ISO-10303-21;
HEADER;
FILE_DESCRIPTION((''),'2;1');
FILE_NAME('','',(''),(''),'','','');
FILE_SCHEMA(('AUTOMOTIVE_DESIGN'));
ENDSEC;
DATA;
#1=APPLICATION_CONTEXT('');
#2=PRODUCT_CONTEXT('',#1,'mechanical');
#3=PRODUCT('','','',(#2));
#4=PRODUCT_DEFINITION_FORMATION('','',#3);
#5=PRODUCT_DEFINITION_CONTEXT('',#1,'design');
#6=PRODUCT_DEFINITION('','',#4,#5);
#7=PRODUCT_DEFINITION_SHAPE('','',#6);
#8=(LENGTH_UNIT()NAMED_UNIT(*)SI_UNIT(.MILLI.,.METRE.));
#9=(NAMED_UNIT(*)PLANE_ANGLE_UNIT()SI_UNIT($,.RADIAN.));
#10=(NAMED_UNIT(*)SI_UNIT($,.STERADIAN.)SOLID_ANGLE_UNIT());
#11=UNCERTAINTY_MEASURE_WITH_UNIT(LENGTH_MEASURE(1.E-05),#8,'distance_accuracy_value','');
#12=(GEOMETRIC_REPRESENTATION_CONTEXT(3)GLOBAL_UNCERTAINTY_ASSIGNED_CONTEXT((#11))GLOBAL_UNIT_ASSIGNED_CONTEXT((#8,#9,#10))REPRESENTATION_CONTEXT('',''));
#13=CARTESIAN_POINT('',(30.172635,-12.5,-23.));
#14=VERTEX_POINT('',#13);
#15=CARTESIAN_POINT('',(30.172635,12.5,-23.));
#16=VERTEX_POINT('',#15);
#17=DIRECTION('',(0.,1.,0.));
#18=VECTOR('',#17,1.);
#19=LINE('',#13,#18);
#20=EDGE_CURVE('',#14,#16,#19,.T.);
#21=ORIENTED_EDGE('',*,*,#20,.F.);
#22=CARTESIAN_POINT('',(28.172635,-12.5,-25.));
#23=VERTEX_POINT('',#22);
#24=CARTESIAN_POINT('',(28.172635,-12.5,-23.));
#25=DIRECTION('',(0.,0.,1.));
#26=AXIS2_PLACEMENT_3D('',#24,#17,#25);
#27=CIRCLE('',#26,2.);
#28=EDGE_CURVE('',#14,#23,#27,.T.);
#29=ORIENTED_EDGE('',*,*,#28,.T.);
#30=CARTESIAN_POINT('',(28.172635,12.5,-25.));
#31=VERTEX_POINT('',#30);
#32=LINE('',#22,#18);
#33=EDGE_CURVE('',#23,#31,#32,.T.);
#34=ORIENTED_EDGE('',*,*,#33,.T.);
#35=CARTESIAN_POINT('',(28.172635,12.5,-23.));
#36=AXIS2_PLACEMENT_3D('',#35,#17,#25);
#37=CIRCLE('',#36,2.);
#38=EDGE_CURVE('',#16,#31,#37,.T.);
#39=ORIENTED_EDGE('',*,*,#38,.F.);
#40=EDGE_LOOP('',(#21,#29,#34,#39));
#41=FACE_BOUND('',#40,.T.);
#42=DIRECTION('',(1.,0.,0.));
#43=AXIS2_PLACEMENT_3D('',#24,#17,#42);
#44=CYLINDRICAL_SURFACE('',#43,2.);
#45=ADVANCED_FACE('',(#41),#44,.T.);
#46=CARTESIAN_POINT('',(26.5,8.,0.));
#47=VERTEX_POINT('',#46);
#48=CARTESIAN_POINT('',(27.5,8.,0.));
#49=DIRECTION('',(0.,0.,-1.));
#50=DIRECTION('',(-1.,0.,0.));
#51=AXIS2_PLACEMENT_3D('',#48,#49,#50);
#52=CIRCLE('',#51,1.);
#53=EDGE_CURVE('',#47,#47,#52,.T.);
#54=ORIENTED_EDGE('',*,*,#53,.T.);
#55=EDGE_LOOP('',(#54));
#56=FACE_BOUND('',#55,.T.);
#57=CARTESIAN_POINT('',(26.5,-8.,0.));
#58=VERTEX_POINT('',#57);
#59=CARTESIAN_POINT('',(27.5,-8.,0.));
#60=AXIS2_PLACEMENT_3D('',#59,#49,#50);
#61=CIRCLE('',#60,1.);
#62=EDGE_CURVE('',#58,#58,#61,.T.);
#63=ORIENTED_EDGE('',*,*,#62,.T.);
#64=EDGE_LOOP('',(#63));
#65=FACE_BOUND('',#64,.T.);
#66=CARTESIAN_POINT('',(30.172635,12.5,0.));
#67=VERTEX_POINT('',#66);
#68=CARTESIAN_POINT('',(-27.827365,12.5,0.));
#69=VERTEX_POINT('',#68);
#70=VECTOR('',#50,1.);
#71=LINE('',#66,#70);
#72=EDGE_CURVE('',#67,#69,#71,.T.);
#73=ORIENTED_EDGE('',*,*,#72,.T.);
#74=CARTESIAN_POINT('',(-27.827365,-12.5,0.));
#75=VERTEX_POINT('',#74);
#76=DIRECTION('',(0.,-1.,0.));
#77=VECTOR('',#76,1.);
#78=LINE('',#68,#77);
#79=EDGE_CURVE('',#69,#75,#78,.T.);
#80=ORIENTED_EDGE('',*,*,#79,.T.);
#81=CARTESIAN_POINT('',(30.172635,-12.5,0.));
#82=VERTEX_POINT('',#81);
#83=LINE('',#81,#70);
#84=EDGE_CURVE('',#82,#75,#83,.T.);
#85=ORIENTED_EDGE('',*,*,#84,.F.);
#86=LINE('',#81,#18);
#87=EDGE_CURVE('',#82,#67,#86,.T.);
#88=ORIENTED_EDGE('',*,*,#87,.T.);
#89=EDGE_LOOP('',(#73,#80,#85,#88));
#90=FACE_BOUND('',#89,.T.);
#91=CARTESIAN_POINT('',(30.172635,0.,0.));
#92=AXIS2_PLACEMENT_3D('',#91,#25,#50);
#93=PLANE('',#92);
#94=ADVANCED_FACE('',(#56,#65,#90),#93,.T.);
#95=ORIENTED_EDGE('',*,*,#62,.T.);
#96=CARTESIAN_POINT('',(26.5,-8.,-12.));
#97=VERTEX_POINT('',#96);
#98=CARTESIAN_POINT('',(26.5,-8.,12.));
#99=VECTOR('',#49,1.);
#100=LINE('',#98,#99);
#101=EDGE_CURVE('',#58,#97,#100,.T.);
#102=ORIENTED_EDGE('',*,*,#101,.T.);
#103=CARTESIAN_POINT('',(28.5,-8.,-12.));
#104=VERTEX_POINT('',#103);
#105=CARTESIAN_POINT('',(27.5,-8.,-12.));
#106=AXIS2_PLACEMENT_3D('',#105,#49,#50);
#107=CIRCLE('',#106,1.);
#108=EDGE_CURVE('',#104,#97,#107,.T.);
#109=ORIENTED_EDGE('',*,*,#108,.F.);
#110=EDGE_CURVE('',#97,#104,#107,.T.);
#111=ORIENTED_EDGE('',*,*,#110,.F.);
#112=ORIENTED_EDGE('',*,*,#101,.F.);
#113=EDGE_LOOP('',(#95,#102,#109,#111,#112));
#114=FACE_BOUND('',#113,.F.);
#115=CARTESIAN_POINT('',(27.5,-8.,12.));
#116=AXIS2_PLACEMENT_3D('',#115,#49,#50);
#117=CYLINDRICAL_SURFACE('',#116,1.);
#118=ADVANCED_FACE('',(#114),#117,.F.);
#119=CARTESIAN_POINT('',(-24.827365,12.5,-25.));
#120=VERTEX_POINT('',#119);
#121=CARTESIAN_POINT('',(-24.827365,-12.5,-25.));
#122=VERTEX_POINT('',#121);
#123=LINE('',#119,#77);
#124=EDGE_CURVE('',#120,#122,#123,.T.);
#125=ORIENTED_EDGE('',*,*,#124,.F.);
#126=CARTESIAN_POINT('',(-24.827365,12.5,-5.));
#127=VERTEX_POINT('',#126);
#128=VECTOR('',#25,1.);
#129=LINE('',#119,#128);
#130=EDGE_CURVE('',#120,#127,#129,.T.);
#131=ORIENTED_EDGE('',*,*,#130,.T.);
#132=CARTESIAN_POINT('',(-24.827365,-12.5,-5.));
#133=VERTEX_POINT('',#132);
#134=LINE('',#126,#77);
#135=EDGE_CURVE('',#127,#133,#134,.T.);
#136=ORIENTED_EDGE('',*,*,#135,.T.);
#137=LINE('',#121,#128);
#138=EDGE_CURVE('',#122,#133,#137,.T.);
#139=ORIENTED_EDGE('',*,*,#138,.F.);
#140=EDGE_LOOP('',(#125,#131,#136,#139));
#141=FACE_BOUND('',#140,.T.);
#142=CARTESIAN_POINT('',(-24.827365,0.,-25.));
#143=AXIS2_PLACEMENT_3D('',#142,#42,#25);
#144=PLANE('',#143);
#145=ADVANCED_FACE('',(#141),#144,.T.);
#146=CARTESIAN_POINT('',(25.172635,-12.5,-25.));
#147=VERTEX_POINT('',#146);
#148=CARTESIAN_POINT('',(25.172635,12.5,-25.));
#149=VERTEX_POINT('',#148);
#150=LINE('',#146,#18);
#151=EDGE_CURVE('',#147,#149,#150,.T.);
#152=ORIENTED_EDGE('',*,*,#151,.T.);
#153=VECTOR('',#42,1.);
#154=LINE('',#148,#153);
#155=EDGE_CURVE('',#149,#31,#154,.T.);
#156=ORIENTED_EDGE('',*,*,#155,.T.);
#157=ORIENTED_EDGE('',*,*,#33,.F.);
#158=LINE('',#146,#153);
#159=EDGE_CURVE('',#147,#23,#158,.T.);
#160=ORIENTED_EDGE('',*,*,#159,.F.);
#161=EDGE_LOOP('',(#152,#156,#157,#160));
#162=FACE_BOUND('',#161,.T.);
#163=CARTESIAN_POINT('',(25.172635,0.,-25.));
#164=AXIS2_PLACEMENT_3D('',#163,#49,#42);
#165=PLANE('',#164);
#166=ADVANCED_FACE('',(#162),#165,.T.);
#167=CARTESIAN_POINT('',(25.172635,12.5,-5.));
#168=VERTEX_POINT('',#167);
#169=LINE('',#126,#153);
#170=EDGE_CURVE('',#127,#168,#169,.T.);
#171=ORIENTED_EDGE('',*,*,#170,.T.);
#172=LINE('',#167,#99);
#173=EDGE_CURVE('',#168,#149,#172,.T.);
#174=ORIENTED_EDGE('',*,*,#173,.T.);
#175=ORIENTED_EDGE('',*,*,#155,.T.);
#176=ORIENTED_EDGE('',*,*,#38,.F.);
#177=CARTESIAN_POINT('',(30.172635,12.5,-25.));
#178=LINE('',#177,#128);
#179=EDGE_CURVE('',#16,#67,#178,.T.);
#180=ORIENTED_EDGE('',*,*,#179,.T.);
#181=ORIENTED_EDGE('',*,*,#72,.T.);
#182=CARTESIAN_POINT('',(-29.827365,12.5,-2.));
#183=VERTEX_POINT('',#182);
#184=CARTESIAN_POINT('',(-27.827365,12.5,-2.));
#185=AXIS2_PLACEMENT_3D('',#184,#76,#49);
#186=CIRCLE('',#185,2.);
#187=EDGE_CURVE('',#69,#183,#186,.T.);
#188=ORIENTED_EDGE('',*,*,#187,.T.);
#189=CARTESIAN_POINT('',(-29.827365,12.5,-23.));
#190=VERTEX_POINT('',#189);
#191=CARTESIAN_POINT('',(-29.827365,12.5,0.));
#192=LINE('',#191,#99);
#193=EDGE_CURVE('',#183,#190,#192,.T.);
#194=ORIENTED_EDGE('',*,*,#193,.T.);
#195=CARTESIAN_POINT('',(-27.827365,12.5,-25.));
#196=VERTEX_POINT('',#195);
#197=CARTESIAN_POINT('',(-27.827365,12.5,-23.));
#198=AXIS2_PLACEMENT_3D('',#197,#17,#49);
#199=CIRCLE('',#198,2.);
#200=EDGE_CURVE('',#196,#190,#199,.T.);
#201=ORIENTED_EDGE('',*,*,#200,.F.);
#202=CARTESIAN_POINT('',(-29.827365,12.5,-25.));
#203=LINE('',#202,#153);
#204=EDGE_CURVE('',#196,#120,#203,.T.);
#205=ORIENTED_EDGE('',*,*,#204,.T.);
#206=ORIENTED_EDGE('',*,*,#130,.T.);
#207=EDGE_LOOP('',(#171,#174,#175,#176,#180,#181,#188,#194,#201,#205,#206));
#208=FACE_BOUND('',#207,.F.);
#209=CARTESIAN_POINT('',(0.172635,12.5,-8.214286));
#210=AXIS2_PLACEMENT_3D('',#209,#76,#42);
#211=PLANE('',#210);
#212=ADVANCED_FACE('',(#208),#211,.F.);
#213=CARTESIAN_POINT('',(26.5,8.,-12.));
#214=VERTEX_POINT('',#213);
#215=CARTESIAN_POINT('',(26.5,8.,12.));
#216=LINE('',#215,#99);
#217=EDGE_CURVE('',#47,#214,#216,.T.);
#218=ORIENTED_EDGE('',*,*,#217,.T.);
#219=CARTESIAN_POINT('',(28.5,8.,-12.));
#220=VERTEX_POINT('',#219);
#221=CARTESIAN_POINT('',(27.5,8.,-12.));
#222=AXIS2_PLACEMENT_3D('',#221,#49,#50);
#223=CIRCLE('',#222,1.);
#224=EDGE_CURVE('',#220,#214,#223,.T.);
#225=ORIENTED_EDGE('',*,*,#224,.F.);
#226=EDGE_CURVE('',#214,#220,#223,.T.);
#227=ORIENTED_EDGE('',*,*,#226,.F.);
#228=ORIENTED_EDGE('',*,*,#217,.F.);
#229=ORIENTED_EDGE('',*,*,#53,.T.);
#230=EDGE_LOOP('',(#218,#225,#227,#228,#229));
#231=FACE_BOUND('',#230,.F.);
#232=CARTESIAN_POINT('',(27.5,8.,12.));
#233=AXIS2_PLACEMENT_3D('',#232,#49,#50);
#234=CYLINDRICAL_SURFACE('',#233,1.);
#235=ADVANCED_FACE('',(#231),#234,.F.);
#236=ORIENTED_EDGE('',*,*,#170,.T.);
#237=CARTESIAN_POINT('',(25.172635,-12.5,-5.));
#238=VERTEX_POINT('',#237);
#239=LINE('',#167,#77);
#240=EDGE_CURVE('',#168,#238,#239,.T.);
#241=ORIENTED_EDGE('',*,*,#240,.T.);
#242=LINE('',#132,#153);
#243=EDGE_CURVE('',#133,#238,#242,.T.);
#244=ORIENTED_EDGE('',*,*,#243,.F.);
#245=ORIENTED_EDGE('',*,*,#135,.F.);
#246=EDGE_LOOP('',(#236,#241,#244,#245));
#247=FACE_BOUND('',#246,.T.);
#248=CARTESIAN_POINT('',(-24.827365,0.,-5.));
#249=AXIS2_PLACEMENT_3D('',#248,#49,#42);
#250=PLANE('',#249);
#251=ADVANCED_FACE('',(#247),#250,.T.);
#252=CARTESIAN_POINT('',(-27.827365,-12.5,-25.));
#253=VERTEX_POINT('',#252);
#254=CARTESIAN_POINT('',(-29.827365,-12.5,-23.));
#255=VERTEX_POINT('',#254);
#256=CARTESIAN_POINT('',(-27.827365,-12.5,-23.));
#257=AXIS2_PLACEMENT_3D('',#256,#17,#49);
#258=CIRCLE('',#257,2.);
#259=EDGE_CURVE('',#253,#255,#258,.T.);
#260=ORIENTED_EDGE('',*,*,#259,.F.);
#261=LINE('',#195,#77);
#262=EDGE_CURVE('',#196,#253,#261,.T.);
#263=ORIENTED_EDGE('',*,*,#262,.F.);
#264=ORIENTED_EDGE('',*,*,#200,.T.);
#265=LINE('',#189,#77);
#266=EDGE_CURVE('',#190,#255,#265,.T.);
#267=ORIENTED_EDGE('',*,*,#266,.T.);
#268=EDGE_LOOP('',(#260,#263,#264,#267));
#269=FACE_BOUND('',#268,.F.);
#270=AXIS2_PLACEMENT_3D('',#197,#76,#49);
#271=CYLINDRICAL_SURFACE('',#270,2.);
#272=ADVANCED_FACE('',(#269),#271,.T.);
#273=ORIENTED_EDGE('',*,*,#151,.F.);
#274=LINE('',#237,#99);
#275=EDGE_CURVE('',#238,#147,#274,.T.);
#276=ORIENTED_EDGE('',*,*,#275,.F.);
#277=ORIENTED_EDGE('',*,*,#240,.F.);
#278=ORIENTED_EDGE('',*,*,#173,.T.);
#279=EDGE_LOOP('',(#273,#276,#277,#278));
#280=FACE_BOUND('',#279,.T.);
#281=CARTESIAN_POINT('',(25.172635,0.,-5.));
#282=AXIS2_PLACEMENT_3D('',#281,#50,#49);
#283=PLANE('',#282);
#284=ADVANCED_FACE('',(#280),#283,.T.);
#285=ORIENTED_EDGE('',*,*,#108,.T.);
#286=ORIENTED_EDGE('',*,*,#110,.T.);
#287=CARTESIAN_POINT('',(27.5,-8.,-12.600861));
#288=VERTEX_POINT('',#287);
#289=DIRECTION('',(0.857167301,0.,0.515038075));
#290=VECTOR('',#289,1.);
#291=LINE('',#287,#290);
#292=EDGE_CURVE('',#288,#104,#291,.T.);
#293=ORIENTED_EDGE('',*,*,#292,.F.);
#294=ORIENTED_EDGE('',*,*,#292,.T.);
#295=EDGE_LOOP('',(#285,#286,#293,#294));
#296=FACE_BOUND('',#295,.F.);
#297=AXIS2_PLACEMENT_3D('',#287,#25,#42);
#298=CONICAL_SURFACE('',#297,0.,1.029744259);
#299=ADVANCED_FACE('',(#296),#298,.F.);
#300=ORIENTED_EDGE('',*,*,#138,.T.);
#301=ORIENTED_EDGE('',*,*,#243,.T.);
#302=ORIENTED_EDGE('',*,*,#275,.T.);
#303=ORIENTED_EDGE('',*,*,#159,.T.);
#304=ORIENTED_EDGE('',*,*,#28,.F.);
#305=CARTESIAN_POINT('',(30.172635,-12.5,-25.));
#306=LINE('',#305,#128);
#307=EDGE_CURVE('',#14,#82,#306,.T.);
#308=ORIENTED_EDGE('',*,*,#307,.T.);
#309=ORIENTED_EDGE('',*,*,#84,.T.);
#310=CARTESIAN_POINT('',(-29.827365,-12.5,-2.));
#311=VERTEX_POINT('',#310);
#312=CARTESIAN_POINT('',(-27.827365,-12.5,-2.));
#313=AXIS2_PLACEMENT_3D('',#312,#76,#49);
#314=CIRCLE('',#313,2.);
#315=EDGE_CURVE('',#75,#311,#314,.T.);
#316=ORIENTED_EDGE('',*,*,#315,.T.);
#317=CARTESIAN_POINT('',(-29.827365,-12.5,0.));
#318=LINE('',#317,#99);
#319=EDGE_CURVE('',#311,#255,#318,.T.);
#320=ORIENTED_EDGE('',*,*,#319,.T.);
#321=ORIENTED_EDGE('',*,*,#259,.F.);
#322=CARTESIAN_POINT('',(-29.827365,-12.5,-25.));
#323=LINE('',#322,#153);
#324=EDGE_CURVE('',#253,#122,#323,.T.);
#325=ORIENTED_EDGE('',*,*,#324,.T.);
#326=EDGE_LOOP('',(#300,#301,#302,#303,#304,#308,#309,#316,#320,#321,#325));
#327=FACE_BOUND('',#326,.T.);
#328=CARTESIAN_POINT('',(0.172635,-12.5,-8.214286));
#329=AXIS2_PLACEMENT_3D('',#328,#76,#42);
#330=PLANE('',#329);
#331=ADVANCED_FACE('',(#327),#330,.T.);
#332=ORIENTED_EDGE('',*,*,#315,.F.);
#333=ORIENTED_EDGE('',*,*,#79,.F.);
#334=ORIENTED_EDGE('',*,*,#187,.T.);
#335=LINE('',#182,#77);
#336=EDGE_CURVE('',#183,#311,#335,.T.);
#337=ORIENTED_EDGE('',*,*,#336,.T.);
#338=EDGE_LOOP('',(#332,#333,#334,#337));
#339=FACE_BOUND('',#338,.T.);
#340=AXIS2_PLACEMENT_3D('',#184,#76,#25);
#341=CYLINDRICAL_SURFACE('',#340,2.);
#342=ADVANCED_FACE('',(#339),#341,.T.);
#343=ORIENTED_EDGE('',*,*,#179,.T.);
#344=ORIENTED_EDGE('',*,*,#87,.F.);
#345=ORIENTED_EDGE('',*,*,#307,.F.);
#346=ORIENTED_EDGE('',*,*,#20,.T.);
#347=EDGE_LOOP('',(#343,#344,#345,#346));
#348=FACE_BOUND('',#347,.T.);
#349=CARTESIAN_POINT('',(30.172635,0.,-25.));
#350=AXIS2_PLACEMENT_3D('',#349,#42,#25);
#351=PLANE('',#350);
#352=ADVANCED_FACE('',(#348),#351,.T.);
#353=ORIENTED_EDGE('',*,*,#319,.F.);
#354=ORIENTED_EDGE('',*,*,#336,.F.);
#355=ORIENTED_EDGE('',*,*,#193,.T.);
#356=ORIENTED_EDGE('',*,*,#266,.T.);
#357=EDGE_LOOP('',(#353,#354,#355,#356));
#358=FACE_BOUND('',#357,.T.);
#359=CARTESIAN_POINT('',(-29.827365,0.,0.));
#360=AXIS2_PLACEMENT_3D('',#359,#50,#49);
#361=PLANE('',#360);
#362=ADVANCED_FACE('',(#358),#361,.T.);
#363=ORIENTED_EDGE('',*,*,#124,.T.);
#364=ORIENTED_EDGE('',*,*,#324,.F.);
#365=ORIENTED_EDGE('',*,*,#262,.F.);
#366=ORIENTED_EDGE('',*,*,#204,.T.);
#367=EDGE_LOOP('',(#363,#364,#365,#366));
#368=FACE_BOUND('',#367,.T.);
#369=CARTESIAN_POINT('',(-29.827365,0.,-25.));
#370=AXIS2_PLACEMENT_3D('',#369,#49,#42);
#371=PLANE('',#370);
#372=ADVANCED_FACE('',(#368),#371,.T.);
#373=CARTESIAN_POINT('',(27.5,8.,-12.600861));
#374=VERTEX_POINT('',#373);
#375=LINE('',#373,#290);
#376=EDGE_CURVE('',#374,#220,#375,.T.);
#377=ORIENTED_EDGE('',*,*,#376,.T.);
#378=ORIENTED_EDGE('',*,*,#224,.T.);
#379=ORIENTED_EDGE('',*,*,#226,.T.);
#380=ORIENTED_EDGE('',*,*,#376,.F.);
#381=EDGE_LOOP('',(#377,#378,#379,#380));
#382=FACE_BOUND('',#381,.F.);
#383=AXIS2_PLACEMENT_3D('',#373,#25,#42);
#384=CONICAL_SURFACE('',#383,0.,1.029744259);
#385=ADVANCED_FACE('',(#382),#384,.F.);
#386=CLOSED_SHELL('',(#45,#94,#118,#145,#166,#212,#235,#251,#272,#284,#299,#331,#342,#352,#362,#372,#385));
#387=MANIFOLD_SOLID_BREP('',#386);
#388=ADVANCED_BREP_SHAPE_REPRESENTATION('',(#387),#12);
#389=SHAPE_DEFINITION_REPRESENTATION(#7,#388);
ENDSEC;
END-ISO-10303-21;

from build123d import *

# Parameters (mm, degrees)
F1_DEPTH = 12.5
F3_R     = 2
F4_D     = 2
F4_DEPTH = 12
F4_TIP   = 0.600860619


# Not quite as in the source:
# - a feature names something its author has since deleted; it is built from what else it names


with BuildPart() as f1:
    # F0 (on Front) → F1 (new body, symmetric)
    with BuildSketch(Plane.XZ):
        Polygon((30.1726347237, 0), (-29.8273652763, 0), (-29.8273652763, -25), (-24.8273652763, -25), (-24.8273652763, -5), (25.1726347237, -5), (25.1726347237, -25), (30.1726347237, -25), align=None)
    extrude(amount=F1_DEPTH, both=True)

    # F3
    f3_edges = [f1.edges().sort_by_distance(p)[0] for p in [
        (30.172635, 0, -25),
        (-29.827365, 0, -25),
        (-29.827365, 0, 0),
    ]]
    fillet(f3_edges, radius=F3_R)

    # F4
    with Locations(Plane.XY):
        with Locations((27.5, 8), (27.5, -8)):
            Hole(F4_D / 2, depth=F4_DEPTH)
            with Locations((0, 0, -(F4_DEPTH + F4_TIP / 2))):  # 118° drill point
                Cone(0, F4_D / 2, F4_TIP, mode=Mode.SUBTRACT)


solid = f1.part
